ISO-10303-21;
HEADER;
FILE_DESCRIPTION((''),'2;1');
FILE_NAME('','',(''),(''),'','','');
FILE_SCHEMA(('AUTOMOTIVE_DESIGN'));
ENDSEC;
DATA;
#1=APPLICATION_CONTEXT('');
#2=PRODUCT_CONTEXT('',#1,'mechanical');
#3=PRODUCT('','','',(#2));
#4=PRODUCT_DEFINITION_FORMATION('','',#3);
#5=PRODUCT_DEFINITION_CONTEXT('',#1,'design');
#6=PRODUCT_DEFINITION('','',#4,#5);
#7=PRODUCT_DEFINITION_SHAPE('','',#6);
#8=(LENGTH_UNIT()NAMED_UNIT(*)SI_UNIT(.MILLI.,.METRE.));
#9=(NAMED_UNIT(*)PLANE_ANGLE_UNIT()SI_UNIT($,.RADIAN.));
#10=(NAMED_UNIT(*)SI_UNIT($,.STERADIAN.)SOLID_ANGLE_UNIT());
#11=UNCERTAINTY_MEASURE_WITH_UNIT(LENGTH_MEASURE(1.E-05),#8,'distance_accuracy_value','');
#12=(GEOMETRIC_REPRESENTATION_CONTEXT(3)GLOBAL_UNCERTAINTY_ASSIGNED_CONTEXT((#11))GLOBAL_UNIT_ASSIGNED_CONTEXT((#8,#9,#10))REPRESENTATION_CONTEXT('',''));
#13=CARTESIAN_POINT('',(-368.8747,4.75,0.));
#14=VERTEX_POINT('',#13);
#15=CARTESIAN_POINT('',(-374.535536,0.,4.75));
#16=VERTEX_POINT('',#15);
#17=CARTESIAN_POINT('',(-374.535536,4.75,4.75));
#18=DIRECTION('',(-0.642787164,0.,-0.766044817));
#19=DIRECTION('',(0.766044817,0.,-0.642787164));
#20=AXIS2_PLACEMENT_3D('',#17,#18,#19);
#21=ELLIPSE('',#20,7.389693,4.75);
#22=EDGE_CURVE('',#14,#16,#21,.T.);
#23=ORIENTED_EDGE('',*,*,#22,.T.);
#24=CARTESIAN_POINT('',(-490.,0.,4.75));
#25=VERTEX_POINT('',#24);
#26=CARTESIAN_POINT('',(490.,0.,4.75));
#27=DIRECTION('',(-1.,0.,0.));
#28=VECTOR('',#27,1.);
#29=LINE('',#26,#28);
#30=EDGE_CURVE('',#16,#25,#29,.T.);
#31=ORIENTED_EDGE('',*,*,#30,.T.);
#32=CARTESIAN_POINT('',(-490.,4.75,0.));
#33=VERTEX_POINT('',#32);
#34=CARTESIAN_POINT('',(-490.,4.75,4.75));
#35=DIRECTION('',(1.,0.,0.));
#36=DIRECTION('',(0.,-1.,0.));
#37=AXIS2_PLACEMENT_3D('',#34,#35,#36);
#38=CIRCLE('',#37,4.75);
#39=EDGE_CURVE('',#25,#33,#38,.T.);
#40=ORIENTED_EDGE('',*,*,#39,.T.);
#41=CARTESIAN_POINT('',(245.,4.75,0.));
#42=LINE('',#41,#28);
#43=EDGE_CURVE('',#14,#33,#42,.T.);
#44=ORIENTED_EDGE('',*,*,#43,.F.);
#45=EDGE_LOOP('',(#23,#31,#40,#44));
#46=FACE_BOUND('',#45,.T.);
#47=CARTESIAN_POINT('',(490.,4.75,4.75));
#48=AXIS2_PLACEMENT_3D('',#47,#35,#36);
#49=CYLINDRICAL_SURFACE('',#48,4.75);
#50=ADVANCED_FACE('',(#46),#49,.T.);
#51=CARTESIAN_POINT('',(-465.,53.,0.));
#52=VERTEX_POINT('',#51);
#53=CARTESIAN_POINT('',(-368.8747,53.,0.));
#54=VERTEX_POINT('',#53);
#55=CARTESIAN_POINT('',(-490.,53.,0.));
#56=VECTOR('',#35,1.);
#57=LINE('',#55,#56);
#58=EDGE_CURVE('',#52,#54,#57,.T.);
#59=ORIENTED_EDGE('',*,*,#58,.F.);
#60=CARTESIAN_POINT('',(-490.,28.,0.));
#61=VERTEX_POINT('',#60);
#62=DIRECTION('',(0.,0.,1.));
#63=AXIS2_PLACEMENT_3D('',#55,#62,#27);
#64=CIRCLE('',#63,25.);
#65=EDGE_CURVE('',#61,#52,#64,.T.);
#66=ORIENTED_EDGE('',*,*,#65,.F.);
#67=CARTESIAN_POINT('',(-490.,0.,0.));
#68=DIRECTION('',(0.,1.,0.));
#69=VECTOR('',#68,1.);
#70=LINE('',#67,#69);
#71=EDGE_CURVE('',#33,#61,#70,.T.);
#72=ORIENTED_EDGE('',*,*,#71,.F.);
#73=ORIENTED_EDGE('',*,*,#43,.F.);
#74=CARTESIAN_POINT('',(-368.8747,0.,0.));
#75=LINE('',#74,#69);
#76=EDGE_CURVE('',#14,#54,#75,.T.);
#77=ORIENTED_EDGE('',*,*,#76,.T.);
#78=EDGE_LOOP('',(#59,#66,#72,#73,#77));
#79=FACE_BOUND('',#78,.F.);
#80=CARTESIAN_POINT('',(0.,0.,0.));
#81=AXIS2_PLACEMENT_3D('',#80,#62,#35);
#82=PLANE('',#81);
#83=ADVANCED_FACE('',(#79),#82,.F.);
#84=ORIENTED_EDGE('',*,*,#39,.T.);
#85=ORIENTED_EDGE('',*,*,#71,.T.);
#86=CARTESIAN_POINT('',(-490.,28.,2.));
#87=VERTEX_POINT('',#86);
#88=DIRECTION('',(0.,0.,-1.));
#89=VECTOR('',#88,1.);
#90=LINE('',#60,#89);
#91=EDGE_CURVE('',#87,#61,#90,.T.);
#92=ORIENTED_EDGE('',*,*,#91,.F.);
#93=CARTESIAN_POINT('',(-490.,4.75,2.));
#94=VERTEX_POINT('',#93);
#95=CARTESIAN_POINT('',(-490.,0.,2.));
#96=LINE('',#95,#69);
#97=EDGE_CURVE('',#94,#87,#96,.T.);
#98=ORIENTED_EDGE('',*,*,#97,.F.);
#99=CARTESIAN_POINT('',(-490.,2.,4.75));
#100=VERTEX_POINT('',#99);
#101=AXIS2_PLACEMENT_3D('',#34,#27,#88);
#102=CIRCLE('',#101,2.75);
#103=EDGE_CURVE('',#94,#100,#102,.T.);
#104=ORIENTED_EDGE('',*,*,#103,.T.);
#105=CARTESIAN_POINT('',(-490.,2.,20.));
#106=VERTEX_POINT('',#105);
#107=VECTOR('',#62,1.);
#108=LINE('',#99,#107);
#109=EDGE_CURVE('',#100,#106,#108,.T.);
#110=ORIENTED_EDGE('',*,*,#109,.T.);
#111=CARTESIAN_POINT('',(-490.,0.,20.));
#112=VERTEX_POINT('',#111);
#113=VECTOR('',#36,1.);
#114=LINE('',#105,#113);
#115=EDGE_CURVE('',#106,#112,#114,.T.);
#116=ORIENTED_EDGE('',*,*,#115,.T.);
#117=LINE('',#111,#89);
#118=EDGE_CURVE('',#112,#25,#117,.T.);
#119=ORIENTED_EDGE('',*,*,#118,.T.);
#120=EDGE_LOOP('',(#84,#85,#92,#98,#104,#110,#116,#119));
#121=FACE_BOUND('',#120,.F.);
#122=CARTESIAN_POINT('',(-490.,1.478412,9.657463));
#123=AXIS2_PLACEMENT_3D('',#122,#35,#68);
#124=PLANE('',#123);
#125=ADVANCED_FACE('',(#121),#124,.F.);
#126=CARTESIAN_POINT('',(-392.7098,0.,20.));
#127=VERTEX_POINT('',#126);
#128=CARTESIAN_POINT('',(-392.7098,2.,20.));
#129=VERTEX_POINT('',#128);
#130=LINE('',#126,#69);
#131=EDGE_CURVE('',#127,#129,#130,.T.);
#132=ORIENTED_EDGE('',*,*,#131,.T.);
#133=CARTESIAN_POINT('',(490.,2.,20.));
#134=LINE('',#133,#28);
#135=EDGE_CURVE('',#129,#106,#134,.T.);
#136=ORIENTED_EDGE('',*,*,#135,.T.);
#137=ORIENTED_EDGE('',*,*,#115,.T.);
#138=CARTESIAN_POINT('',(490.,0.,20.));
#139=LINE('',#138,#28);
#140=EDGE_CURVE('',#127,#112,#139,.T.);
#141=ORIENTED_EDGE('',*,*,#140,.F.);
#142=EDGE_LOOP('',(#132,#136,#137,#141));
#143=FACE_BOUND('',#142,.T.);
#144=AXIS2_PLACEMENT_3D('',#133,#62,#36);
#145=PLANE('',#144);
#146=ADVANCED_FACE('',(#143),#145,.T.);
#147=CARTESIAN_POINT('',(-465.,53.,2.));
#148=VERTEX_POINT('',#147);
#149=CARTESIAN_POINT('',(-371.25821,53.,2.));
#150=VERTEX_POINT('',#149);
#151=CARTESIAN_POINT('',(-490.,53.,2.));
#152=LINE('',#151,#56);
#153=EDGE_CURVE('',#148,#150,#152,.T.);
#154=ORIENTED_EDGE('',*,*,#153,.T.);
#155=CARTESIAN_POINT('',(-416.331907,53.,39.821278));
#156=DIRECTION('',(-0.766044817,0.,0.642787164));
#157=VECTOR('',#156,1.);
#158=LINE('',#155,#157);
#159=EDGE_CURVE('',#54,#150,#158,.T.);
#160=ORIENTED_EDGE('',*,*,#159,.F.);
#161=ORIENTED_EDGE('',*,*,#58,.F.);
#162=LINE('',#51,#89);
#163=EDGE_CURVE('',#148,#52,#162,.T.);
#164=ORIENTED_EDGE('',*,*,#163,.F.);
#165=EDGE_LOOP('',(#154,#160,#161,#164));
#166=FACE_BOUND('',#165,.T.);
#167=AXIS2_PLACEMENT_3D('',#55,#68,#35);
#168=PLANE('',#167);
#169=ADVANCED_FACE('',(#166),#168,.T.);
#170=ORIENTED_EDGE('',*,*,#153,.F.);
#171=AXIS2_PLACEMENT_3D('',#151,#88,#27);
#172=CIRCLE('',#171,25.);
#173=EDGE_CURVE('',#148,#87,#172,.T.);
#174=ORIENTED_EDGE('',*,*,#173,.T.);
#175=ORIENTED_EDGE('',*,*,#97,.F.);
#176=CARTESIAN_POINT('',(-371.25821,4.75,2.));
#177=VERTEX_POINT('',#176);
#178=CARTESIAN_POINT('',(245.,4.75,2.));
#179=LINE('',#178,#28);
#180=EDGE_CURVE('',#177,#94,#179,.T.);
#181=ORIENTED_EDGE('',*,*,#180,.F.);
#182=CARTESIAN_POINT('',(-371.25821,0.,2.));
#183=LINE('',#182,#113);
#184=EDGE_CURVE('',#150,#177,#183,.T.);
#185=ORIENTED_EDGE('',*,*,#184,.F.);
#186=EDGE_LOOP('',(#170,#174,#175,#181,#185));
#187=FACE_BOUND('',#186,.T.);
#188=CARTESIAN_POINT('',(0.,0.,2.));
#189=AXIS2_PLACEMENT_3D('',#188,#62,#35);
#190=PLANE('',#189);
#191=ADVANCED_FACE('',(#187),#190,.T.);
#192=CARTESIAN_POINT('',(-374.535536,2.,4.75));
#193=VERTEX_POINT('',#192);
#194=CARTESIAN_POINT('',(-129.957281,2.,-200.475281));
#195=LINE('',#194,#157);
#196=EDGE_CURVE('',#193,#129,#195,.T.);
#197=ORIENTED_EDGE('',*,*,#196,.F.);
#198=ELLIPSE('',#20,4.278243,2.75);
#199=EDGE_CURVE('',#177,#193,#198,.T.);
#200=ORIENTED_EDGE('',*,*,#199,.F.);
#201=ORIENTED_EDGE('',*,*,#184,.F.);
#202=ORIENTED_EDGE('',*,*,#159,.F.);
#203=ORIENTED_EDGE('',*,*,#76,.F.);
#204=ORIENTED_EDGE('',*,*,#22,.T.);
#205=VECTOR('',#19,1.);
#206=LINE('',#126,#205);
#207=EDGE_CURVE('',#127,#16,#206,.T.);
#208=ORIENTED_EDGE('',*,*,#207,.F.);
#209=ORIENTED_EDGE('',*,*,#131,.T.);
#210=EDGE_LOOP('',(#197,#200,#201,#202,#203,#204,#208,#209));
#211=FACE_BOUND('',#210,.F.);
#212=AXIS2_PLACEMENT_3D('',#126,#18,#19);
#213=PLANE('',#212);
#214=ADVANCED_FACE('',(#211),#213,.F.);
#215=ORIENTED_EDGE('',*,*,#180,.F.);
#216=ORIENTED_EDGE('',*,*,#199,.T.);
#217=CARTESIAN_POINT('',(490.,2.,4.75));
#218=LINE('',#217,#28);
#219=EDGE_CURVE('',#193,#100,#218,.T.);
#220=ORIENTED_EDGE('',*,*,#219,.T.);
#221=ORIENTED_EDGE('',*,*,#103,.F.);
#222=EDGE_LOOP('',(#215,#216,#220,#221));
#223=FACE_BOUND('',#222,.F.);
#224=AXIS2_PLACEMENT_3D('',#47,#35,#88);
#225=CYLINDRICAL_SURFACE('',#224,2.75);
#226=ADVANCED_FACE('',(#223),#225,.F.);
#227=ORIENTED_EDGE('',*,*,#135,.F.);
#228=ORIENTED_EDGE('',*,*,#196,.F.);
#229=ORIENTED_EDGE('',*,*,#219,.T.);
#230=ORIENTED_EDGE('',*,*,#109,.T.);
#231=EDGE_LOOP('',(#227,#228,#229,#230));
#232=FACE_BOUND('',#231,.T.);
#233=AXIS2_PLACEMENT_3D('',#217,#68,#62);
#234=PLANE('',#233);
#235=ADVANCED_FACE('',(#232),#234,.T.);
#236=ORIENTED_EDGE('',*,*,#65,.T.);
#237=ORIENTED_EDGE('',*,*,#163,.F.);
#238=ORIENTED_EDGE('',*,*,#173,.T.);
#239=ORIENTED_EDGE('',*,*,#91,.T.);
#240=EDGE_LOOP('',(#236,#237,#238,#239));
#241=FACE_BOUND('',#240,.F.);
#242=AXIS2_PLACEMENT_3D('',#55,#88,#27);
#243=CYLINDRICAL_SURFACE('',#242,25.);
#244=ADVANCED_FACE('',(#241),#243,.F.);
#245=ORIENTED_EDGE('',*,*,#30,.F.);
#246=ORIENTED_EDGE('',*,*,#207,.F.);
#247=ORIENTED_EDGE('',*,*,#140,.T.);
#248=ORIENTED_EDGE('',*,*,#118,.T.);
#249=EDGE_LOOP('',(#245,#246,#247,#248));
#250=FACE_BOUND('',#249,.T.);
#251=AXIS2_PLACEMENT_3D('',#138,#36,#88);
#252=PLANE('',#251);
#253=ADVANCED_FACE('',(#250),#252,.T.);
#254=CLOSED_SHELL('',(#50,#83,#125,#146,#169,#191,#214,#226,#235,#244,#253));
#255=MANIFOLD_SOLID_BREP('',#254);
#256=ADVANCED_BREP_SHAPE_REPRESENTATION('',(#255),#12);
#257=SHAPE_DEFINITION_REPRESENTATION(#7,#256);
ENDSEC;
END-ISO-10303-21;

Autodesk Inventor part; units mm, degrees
ref_plane "YZ Plane" through (0, 0, 0) normal (1, 0, 0) x (0, 1, 0)
ref_plane "XZ Plane" through (0, 0, 0) normal (0, 1, 0) x (-1, 0, 0)
ref_plane "XY Plane" through (0, 0, 0) normal (0, 0, 1) x (1, 0, 0)
sketch "Sketch1" plane through (0, 0, 0) normal (0, 0, 1) x (1, 0, 0)
  line L0 (-490, 53) -> (490, 53)
  line L1 (490, 53) -> (490, 0)
  line L2 (490, 0) -> (-490, 0)
  line L3 (-490, 0) -> (-490, 53)
  point P0 (0, 0)
  point P1 (0, 0)
  dimension "d0" = 980
  dimension "d1" = 53
extrude "Plate1" add sketch "Sketch1" along normal blind 2
sketch "Sketch2" plane through (490, 2, 0) normal (0, -1, 0) x (1, 0, 0)
  line L0 (-980, 0) -> (0, 0)
  line L1 (0, 0) -> (0, 20)
  line L2 (0, 20) -> (-980, 20)
  line L3 (-980, 20) -> (-980, 0)
edge flange "Flange1" height 20 angle 90 thickness 2 bend radius 2.75 thickness toward (0, -1, 0) relief round relief width 2 relief depth 1 edges at (0, 0, 2) wall of the first edge with corners at (-490, 2, 0) (490, 2, 0) (490, 2, 20) (-490, 2, 20)
bend "Bend1"
corner "Corner1"
sketch "Sketch5" plane through (0, 0, 0) normal (0, 0, -1) x (-1, 0, 0)
  line L0 (490, 53) -> (-490, 53) projected
  line L1 (490, 0) -> (-490, 0) projected
  circle A0 centre (0, 53) radius 25
  line L2 (243.95, 53) -> (246.05, 53)
  line L3 (246.05, 53) -> (246.05, 27)
  line L4 (246.05, 27) -> (243.95, 27)
  line L5 (243.95, 27) -> (243.95, 53)
  line L6 (-243.95, 53) -> (-246.05, 53)
  line L7 (-246.05, 53) -> (-246.05, 27)
  line L8 (-246.05, 27) -> (-243.95, 27)
  line L9 (-243.95, 27) -> (-243.95, 53)
  line L10 (0, 53) -> (0, 0) construction
  circle A1 centre (490, 53) radius 25
  point P0 (0, 0)
  point P1 (245, 27)
  point P2 (-245, 27)
  point P3 (246.05, 53)
  point P4 (-25, 53)
  point P5 (25, 53)
  point P6 (-246.05, 53)
  dimension "d45" = 50
  dimension "d48" = 2.1
  dimension "d49" = 490
  dimension "d51" = 27
  dimension "d52" = 26
extrude "Extrusion1" cut sketch "Sketch5" against normal through all contours L3 L4 L5 L0 | L9 L8 L7 L0 | A1
sketch "Sketch9" plane through (0, 0, 2) normal (0, 0, 1) x (1, 0, 0)
  line L0 (-389.1031, 29.596) -> (-389.1031, 17.596) construction
  line L1 (-389.1031, 17.596) -> (-589.1031, 17.596) construction
  line L2 (-589.1031, 17.596) -> (-589.1031, 29.596) construction
  line L3 (-589.1031, 29.596) -> (-389.1031, 29.596) construction
  line L4 (-490, 53) -> (490, 53) projected
  point P0 (0, 0)
  point P1 (1.05, 68)
  point P2 (490, 53)
  point P3 (-490, 53)
  dimension "d40" = 200
  dimension "d41" = 12
mark "Mark2"
sketch "Sketch10" plane through (-490, 0, 20) normal (0, -1, 0) x (1, 0, 0)
  line L0 (980, -20) -> (736.05, -20) projected
  line L1 (0, 0) -> (980, 0) projected
  line L2 (980, -20) -> (97.2902, -20)
  line L3 (97.2902, -20) -> (97.2902, 0)
  line L4 (97.2902, 0) -> (980, 0)
  line L5 (980, 0) -> (980, -20)
  line L6 (97.2902, 0) -> (121.1253, -20)
  point P0 (490, -20)
  point P1 (736.05, -20)
  dimension "d53" = 882.7098
  dimension "d54" = 50
extrude "Extrusion4" cut sketch "Sketch10" against normal through all contours L0 L2 L6 L1 L5
equation "\"d2\" = Thickness"
equation "\"d3\" = BendReliefWidth"
equation "\"d4\" = BendReliefDepth"
equation "\"d5\" = MinimumRemnant"
equation "\"d6\" = TransitionRadius"
equation "\"d9\" = BendRadius"
equation "\"d10\" = CornerReliefSize"
equation "\"d11\" = GapSize"
equation "\"d12\" = JacobiRadiusSize"
equation "\"BendReliefWidth\" = Thickness"
equation "\"BendReliefDepth\" = 0.5 * Thickness"
equation "\"CornerReliefSize\" = 4 * Thickness"
equation "\"MinimumRemnant\" = 2 * Thickness"
equation "\"TransitionRadius\" = BendRadius"
equation "\"JacobiRadiusSize\" = BendRadius"
equation "\"GapSize\" = Thickness"
equation "\"Thickness\" = 2"
equation "\"BendRadius\" = 2.75"
properties part number "MSC 330 STRINGER BOARD  ###" material "Stainless Steel"
